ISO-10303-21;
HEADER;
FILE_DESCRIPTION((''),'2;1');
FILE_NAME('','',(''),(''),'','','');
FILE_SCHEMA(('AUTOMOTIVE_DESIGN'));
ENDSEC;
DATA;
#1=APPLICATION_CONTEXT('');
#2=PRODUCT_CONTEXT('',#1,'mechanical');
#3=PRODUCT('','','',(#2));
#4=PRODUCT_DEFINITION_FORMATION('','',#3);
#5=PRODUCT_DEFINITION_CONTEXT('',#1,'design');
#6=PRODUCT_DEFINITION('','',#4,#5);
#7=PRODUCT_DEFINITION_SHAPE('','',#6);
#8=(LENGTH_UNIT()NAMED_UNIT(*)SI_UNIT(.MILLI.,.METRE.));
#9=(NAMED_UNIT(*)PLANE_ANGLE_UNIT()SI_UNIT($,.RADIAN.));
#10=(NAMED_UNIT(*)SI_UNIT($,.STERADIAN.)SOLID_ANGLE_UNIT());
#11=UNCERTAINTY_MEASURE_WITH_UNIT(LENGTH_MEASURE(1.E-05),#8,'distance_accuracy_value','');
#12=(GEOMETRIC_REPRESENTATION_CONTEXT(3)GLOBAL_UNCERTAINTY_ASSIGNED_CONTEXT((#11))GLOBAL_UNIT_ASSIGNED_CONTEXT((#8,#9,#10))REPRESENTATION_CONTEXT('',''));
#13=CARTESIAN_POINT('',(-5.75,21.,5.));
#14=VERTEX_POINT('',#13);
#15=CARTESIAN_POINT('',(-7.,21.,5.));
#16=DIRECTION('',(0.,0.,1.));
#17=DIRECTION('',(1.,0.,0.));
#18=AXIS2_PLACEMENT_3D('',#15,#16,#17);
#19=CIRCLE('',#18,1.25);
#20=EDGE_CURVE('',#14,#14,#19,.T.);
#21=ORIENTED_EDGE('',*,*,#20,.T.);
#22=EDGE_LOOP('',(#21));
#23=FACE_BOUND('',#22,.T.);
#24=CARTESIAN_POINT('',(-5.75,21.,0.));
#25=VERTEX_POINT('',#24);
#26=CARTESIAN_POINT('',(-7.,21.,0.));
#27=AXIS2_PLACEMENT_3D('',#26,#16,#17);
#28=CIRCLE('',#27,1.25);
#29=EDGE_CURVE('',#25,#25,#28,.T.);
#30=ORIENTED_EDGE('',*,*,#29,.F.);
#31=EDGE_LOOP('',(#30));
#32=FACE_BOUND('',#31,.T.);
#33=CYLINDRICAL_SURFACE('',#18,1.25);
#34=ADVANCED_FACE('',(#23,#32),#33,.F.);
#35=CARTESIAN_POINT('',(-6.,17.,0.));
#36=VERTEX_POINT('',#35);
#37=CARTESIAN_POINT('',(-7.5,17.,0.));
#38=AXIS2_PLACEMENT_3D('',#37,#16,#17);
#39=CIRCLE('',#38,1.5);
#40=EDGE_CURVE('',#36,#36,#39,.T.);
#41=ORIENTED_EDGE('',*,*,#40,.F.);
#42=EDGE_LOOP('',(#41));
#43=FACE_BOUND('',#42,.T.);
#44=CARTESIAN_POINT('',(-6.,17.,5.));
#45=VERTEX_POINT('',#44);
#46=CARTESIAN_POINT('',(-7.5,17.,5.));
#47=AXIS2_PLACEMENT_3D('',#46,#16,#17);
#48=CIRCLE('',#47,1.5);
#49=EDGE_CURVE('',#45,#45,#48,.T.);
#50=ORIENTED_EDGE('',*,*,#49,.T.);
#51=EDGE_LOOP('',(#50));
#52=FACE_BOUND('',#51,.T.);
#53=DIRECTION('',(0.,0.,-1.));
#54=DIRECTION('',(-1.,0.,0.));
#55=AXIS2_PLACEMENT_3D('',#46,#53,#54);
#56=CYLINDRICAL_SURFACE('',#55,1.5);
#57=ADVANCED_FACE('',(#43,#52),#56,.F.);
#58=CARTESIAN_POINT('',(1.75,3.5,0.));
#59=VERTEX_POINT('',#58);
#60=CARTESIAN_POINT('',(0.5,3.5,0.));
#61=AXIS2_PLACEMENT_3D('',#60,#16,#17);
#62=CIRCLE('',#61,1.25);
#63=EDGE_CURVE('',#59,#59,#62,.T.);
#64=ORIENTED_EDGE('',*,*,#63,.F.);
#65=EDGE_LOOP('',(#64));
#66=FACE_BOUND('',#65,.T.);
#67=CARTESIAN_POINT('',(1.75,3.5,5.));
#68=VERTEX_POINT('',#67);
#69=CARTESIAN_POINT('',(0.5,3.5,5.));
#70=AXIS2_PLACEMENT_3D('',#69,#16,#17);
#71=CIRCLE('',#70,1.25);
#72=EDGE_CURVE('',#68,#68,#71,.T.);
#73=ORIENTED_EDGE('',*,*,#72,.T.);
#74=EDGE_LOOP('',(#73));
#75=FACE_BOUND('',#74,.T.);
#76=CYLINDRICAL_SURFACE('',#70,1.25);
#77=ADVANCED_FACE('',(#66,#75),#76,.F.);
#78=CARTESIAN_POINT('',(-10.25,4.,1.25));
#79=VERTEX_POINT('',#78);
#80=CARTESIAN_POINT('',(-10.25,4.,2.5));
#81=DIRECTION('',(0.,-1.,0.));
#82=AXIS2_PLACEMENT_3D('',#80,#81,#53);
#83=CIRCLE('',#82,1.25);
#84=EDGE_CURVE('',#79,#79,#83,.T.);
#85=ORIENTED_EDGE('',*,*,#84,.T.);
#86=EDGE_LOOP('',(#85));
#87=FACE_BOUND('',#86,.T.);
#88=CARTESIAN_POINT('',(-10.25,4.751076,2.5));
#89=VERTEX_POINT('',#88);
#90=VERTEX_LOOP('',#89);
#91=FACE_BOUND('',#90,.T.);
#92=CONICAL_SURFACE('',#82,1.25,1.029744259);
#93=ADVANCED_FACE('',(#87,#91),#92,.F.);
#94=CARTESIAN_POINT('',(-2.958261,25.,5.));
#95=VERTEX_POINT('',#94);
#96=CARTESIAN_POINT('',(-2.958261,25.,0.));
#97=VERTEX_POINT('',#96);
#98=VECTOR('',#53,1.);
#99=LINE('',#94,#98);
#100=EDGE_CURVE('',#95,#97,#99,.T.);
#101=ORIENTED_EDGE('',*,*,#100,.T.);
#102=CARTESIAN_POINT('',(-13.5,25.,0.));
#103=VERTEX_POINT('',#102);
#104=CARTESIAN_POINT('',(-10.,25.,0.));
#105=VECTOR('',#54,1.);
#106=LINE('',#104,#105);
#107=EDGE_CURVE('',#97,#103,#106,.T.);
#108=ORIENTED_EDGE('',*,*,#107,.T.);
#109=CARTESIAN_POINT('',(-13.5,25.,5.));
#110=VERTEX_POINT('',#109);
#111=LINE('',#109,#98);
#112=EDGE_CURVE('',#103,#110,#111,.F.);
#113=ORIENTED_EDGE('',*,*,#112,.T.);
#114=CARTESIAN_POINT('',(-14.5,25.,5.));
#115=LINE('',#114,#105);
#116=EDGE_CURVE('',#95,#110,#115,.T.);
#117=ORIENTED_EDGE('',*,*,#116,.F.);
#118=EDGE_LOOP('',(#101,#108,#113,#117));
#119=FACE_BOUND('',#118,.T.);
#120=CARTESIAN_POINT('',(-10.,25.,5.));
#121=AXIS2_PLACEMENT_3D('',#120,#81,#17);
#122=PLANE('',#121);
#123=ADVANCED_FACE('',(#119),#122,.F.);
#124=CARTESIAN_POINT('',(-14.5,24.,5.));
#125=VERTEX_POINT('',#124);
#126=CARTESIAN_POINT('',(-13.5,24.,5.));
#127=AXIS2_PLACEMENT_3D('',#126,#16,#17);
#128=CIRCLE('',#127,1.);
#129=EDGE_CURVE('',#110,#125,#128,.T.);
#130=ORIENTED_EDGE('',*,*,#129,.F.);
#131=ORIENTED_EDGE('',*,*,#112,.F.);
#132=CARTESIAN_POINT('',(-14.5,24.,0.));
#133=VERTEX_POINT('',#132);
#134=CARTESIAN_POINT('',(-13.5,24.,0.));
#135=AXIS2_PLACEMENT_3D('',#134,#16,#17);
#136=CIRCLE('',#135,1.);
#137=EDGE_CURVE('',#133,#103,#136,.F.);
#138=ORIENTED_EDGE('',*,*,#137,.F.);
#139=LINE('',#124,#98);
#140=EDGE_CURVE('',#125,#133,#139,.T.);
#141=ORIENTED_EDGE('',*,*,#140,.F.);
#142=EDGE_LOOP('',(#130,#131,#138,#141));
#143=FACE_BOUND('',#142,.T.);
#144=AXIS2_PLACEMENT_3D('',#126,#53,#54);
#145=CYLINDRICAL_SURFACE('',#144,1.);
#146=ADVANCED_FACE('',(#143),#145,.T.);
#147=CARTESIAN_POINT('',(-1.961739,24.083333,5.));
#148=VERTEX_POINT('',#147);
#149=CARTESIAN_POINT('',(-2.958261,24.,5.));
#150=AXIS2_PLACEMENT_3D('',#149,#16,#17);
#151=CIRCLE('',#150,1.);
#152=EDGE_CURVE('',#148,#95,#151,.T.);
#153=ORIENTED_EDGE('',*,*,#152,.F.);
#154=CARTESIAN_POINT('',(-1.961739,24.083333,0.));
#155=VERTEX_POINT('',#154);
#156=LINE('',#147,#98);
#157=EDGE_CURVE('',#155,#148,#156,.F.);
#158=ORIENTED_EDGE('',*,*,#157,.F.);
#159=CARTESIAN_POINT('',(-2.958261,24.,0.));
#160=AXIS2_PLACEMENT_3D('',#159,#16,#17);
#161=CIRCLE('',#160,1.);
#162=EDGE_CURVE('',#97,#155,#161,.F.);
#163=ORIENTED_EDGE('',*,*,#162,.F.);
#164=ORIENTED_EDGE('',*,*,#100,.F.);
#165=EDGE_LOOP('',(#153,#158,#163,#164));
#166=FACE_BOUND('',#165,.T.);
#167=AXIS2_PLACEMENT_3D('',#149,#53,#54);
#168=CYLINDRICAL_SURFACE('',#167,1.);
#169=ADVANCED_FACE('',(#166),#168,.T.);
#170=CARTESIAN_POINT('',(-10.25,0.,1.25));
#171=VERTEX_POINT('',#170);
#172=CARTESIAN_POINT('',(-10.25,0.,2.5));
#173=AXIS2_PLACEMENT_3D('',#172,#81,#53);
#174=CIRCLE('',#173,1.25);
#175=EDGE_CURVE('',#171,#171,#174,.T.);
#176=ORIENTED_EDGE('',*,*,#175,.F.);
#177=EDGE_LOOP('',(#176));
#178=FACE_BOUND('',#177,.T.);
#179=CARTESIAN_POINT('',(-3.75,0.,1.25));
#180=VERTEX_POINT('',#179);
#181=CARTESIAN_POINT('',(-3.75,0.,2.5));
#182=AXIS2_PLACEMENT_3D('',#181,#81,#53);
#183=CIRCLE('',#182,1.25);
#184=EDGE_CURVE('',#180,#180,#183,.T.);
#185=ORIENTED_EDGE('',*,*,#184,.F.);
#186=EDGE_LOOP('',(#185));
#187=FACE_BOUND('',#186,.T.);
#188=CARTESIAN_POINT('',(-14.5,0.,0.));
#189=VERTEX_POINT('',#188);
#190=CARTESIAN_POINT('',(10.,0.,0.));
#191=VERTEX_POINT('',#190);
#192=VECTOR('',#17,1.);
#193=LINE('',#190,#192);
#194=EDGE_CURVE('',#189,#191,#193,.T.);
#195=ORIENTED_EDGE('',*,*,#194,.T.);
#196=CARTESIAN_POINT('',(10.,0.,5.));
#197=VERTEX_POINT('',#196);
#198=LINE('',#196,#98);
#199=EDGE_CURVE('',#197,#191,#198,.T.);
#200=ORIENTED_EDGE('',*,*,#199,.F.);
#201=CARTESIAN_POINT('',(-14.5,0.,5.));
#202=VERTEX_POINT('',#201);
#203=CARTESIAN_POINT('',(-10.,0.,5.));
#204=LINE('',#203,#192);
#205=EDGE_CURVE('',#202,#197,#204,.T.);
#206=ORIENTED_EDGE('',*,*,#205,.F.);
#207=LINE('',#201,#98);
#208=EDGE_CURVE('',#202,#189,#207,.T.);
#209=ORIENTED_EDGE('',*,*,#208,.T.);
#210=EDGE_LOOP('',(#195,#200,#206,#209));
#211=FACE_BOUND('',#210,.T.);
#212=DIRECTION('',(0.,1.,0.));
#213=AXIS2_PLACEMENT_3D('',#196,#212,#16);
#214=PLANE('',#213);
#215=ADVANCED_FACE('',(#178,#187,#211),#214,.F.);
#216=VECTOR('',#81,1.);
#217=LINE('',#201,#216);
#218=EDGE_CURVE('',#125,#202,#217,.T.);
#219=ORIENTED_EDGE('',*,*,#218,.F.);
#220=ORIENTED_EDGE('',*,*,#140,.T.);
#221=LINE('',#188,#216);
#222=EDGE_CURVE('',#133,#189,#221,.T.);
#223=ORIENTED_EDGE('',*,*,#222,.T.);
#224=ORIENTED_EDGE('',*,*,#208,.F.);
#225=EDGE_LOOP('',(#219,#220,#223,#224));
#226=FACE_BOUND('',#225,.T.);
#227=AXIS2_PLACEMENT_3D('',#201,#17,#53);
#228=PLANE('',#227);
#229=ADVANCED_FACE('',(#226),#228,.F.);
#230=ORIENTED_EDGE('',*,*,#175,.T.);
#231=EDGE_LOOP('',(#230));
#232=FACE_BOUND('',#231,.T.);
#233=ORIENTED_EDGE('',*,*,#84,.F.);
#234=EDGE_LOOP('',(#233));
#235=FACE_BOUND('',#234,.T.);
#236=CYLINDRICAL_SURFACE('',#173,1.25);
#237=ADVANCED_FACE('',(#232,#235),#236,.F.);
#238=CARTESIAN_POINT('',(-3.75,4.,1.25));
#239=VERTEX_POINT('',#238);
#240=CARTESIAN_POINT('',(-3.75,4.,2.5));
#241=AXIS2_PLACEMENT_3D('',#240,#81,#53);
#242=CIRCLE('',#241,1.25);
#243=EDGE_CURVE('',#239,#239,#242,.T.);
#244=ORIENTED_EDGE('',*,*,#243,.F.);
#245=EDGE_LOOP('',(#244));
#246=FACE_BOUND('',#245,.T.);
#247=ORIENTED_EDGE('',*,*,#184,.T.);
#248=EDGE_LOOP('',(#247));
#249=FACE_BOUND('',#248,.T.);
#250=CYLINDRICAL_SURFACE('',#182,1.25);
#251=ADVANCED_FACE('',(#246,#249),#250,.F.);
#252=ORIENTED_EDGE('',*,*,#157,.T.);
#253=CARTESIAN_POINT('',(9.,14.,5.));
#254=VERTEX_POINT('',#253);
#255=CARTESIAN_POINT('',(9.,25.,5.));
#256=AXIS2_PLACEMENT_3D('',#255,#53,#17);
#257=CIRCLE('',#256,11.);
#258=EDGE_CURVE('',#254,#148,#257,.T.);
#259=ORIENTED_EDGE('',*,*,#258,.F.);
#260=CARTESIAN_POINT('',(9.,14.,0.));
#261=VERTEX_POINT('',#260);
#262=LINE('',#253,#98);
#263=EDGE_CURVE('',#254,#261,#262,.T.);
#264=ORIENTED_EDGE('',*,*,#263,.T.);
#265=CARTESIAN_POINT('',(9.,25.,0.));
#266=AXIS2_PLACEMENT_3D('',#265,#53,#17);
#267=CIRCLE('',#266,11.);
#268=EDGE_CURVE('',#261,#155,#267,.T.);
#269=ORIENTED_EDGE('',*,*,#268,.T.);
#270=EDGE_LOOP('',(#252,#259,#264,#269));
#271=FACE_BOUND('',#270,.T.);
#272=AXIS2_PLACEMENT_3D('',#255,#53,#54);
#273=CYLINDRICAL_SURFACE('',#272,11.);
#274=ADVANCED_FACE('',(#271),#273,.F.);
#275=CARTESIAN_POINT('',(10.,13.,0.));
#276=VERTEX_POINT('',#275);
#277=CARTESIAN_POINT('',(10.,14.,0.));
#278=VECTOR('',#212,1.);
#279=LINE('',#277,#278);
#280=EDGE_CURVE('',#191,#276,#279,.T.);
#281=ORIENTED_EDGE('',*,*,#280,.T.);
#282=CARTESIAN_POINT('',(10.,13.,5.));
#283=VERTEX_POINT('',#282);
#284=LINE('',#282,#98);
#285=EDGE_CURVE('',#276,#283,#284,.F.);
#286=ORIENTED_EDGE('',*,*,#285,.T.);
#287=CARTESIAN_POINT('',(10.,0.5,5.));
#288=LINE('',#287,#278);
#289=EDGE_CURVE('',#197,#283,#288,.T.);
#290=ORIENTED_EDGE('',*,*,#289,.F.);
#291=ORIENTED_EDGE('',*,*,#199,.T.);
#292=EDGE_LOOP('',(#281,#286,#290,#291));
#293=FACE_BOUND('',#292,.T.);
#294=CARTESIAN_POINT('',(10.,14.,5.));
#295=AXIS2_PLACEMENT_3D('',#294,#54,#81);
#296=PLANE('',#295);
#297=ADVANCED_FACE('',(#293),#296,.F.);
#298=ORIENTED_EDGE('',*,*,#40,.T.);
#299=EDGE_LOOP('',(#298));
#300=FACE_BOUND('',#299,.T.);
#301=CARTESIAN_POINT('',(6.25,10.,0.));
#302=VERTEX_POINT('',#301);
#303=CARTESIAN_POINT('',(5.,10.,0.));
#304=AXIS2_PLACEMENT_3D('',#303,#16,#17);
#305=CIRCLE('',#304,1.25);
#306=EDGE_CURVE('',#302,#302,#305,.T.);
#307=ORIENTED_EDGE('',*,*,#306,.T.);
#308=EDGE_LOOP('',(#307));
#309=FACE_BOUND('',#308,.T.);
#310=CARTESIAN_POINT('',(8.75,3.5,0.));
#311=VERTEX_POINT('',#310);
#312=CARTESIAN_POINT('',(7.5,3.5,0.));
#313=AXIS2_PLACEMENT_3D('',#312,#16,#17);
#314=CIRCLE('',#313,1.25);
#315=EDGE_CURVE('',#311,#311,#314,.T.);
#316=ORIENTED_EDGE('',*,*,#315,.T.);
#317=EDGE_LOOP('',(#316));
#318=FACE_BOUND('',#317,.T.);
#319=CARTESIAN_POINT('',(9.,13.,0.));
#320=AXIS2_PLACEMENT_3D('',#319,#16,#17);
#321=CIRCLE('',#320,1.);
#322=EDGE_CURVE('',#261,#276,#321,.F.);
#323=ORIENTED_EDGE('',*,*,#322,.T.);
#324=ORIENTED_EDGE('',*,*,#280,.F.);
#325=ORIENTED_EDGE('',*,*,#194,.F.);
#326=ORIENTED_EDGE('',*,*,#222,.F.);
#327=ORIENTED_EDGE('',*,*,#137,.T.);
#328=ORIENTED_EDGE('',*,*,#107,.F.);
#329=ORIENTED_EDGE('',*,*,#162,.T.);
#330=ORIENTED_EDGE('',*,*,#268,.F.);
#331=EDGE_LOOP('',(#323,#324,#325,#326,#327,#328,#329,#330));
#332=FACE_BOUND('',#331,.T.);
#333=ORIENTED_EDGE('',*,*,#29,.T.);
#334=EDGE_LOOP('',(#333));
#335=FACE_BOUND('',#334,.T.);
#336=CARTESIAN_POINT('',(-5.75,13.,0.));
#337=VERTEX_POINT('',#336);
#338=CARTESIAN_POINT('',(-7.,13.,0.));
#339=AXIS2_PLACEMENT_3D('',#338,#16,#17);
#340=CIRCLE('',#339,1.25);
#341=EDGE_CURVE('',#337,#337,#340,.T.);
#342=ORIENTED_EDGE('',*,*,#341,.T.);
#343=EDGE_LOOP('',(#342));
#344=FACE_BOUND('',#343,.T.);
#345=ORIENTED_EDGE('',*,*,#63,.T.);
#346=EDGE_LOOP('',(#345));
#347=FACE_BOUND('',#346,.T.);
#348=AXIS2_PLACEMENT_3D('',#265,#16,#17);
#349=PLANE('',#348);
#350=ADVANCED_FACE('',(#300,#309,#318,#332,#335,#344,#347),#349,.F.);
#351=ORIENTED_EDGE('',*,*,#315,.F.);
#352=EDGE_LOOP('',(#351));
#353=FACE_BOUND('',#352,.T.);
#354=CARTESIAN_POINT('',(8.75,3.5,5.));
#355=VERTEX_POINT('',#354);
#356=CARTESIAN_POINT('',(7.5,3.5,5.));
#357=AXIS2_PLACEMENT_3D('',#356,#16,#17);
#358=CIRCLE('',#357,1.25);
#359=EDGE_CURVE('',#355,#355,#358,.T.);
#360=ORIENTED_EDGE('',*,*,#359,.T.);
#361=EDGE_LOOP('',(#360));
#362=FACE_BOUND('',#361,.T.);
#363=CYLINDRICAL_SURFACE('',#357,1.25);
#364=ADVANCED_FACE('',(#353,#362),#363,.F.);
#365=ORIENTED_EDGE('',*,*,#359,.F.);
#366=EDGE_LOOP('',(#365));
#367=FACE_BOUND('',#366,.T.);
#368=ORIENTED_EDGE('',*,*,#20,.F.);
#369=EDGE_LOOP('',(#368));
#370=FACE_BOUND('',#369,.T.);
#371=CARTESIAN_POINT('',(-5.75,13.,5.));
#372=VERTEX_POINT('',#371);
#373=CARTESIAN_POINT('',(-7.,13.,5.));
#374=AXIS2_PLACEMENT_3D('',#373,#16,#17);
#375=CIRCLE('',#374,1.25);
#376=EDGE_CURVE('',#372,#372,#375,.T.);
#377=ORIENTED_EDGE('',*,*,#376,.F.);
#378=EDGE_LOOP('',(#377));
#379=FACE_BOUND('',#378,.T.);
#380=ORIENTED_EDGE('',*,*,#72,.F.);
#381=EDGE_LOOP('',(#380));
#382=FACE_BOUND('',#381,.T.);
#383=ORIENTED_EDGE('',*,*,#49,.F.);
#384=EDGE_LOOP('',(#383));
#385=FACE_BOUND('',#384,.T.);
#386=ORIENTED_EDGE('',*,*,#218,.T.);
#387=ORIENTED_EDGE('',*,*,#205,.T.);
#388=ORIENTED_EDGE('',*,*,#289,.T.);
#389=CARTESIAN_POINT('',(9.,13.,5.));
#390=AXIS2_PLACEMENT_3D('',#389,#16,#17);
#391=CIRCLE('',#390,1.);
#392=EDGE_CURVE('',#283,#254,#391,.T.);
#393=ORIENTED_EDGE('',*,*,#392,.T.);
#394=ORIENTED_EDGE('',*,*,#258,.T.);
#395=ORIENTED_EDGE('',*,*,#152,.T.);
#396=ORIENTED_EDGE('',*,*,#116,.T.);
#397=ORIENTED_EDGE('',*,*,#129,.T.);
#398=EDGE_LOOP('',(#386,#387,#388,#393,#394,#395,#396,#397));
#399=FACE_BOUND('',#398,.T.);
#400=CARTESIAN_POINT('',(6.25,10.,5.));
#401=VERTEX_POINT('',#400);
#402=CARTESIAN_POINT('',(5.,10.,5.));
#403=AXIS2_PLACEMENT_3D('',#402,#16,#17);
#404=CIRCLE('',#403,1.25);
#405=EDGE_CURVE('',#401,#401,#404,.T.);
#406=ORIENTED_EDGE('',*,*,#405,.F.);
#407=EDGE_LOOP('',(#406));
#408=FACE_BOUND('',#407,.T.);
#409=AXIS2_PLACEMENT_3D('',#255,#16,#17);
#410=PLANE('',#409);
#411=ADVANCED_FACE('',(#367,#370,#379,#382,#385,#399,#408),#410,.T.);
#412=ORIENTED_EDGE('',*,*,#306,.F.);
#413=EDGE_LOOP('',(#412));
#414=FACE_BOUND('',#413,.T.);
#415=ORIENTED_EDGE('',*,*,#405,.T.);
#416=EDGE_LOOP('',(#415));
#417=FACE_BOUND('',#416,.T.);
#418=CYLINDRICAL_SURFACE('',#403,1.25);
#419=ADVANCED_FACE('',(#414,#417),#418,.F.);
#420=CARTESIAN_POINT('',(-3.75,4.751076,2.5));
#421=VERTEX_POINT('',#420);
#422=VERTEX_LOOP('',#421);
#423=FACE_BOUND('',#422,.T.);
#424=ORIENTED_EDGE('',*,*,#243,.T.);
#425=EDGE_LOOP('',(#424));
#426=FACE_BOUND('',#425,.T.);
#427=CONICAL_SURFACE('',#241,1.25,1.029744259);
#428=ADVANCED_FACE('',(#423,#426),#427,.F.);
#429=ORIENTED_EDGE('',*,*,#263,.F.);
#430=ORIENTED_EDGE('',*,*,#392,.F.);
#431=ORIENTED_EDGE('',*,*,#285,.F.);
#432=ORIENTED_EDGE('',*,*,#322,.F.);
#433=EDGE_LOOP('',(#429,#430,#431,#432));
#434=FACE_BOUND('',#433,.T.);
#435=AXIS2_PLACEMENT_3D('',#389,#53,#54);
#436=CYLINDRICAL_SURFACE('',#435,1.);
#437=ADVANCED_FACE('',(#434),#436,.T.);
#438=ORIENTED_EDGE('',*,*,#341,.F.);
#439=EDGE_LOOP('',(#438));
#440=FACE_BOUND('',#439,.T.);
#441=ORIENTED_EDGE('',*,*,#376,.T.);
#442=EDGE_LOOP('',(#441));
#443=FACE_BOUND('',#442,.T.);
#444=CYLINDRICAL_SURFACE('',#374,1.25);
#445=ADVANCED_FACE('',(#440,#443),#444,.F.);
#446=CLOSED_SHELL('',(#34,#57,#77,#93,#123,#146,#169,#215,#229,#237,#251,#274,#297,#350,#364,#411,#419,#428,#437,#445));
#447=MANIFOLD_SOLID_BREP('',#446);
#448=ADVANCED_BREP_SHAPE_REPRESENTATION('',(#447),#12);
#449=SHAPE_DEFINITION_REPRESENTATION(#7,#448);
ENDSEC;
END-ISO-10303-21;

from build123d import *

# Parameters (mm, degrees)
SKETCH1_R                   = 1.5
BOSS_EXTRUDE1_DEPTH         = 5
TAP_DRILL_FOR_M3_TAP1_D     = 2.5
TAP_DRILL_FOR_M3_TAP2_D     = 2.5
TAP_DRILL_FOR_M3_TAP2_DEPTH = 4
TAP_DRILL_FOR_M3_TAP2_TIP   = 0.751075774
FILLET1_R                   = 1


with BuildPart() as part:
    # Sketch1 → Boss-Extrude1 (new body)
    with BuildSketch(Plane.XY):
        with BuildLine():
            Line((-10, 25), (-2, 25))
            ThreePointArc((-2, 25), (1.221825407, 17.221825407), (9, 14))
            Line((9, 14), (10, 14))
            Line((10, 14), (10, 0.5))
            Line((10, 0.5), (10, 0))
            Line((10, 0), (-10, 0))
            Line((-10, 0), (-14.5, 0))
            Line((-14.5, 0), (-14.5, 25))
            Line((-14.5, 25), (-10, 25))
        make_face()
        with Locations((-7.5, 17)):
            Circle(SKETCH1_R, mode=Mode.SUBTRACT)
    extrude(amount=BOSS_EXTRUDE1_DEPTH)

    # Tap Drill for M3 Tap1 (through all)
    with Locations(Plane.XY.offset(5)):
        with Locations((-7, 13), (-7, 21), (5, 10), (0.5, 3.5), (7.5, 3.5)):
            Hole(TAP_DRILL_FOR_M3_TAP1_D / 2)

    # Tap Drill for M3 Tap2
    with Locations(Plane(origin=(0, 0, 0), x_dir=(-1, 0, 0), z_dir=(0, -1, 0))):
        with Locations((3.75, -2.5), (10.25, -2.5)):
            Hole(TAP_DRILL_FOR_M3_TAP2_D / 2, depth=TAP_DRILL_FOR_M3_TAP2_DEPTH)
            with Locations((0, 0, -(TAP_DRILL_FOR_M3_TAP2_DEPTH + TAP_DRILL_FOR_M3_TAP2_TIP / 2))):  # 118° drill point
                Cone(0, TAP_DRILL_FOR_M3_TAP2_D / 2, TAP_DRILL_FOR_M3_TAP2_TIP, mode=Mode.SUBTRACT)

    # Fillet1
    fillet1_edges = [part.edges().sort_by_distance(p)[0] for p in [
        (-14.5, 25, 2.5),
        (-2, 25, 2.5),
        (10, 14, 2.5),
    ]]
    fillet(fillet1_edges, radius=FILLET1_R - 0.0001)  # a hair under: the kernel refuses the full size


solid = part.part
